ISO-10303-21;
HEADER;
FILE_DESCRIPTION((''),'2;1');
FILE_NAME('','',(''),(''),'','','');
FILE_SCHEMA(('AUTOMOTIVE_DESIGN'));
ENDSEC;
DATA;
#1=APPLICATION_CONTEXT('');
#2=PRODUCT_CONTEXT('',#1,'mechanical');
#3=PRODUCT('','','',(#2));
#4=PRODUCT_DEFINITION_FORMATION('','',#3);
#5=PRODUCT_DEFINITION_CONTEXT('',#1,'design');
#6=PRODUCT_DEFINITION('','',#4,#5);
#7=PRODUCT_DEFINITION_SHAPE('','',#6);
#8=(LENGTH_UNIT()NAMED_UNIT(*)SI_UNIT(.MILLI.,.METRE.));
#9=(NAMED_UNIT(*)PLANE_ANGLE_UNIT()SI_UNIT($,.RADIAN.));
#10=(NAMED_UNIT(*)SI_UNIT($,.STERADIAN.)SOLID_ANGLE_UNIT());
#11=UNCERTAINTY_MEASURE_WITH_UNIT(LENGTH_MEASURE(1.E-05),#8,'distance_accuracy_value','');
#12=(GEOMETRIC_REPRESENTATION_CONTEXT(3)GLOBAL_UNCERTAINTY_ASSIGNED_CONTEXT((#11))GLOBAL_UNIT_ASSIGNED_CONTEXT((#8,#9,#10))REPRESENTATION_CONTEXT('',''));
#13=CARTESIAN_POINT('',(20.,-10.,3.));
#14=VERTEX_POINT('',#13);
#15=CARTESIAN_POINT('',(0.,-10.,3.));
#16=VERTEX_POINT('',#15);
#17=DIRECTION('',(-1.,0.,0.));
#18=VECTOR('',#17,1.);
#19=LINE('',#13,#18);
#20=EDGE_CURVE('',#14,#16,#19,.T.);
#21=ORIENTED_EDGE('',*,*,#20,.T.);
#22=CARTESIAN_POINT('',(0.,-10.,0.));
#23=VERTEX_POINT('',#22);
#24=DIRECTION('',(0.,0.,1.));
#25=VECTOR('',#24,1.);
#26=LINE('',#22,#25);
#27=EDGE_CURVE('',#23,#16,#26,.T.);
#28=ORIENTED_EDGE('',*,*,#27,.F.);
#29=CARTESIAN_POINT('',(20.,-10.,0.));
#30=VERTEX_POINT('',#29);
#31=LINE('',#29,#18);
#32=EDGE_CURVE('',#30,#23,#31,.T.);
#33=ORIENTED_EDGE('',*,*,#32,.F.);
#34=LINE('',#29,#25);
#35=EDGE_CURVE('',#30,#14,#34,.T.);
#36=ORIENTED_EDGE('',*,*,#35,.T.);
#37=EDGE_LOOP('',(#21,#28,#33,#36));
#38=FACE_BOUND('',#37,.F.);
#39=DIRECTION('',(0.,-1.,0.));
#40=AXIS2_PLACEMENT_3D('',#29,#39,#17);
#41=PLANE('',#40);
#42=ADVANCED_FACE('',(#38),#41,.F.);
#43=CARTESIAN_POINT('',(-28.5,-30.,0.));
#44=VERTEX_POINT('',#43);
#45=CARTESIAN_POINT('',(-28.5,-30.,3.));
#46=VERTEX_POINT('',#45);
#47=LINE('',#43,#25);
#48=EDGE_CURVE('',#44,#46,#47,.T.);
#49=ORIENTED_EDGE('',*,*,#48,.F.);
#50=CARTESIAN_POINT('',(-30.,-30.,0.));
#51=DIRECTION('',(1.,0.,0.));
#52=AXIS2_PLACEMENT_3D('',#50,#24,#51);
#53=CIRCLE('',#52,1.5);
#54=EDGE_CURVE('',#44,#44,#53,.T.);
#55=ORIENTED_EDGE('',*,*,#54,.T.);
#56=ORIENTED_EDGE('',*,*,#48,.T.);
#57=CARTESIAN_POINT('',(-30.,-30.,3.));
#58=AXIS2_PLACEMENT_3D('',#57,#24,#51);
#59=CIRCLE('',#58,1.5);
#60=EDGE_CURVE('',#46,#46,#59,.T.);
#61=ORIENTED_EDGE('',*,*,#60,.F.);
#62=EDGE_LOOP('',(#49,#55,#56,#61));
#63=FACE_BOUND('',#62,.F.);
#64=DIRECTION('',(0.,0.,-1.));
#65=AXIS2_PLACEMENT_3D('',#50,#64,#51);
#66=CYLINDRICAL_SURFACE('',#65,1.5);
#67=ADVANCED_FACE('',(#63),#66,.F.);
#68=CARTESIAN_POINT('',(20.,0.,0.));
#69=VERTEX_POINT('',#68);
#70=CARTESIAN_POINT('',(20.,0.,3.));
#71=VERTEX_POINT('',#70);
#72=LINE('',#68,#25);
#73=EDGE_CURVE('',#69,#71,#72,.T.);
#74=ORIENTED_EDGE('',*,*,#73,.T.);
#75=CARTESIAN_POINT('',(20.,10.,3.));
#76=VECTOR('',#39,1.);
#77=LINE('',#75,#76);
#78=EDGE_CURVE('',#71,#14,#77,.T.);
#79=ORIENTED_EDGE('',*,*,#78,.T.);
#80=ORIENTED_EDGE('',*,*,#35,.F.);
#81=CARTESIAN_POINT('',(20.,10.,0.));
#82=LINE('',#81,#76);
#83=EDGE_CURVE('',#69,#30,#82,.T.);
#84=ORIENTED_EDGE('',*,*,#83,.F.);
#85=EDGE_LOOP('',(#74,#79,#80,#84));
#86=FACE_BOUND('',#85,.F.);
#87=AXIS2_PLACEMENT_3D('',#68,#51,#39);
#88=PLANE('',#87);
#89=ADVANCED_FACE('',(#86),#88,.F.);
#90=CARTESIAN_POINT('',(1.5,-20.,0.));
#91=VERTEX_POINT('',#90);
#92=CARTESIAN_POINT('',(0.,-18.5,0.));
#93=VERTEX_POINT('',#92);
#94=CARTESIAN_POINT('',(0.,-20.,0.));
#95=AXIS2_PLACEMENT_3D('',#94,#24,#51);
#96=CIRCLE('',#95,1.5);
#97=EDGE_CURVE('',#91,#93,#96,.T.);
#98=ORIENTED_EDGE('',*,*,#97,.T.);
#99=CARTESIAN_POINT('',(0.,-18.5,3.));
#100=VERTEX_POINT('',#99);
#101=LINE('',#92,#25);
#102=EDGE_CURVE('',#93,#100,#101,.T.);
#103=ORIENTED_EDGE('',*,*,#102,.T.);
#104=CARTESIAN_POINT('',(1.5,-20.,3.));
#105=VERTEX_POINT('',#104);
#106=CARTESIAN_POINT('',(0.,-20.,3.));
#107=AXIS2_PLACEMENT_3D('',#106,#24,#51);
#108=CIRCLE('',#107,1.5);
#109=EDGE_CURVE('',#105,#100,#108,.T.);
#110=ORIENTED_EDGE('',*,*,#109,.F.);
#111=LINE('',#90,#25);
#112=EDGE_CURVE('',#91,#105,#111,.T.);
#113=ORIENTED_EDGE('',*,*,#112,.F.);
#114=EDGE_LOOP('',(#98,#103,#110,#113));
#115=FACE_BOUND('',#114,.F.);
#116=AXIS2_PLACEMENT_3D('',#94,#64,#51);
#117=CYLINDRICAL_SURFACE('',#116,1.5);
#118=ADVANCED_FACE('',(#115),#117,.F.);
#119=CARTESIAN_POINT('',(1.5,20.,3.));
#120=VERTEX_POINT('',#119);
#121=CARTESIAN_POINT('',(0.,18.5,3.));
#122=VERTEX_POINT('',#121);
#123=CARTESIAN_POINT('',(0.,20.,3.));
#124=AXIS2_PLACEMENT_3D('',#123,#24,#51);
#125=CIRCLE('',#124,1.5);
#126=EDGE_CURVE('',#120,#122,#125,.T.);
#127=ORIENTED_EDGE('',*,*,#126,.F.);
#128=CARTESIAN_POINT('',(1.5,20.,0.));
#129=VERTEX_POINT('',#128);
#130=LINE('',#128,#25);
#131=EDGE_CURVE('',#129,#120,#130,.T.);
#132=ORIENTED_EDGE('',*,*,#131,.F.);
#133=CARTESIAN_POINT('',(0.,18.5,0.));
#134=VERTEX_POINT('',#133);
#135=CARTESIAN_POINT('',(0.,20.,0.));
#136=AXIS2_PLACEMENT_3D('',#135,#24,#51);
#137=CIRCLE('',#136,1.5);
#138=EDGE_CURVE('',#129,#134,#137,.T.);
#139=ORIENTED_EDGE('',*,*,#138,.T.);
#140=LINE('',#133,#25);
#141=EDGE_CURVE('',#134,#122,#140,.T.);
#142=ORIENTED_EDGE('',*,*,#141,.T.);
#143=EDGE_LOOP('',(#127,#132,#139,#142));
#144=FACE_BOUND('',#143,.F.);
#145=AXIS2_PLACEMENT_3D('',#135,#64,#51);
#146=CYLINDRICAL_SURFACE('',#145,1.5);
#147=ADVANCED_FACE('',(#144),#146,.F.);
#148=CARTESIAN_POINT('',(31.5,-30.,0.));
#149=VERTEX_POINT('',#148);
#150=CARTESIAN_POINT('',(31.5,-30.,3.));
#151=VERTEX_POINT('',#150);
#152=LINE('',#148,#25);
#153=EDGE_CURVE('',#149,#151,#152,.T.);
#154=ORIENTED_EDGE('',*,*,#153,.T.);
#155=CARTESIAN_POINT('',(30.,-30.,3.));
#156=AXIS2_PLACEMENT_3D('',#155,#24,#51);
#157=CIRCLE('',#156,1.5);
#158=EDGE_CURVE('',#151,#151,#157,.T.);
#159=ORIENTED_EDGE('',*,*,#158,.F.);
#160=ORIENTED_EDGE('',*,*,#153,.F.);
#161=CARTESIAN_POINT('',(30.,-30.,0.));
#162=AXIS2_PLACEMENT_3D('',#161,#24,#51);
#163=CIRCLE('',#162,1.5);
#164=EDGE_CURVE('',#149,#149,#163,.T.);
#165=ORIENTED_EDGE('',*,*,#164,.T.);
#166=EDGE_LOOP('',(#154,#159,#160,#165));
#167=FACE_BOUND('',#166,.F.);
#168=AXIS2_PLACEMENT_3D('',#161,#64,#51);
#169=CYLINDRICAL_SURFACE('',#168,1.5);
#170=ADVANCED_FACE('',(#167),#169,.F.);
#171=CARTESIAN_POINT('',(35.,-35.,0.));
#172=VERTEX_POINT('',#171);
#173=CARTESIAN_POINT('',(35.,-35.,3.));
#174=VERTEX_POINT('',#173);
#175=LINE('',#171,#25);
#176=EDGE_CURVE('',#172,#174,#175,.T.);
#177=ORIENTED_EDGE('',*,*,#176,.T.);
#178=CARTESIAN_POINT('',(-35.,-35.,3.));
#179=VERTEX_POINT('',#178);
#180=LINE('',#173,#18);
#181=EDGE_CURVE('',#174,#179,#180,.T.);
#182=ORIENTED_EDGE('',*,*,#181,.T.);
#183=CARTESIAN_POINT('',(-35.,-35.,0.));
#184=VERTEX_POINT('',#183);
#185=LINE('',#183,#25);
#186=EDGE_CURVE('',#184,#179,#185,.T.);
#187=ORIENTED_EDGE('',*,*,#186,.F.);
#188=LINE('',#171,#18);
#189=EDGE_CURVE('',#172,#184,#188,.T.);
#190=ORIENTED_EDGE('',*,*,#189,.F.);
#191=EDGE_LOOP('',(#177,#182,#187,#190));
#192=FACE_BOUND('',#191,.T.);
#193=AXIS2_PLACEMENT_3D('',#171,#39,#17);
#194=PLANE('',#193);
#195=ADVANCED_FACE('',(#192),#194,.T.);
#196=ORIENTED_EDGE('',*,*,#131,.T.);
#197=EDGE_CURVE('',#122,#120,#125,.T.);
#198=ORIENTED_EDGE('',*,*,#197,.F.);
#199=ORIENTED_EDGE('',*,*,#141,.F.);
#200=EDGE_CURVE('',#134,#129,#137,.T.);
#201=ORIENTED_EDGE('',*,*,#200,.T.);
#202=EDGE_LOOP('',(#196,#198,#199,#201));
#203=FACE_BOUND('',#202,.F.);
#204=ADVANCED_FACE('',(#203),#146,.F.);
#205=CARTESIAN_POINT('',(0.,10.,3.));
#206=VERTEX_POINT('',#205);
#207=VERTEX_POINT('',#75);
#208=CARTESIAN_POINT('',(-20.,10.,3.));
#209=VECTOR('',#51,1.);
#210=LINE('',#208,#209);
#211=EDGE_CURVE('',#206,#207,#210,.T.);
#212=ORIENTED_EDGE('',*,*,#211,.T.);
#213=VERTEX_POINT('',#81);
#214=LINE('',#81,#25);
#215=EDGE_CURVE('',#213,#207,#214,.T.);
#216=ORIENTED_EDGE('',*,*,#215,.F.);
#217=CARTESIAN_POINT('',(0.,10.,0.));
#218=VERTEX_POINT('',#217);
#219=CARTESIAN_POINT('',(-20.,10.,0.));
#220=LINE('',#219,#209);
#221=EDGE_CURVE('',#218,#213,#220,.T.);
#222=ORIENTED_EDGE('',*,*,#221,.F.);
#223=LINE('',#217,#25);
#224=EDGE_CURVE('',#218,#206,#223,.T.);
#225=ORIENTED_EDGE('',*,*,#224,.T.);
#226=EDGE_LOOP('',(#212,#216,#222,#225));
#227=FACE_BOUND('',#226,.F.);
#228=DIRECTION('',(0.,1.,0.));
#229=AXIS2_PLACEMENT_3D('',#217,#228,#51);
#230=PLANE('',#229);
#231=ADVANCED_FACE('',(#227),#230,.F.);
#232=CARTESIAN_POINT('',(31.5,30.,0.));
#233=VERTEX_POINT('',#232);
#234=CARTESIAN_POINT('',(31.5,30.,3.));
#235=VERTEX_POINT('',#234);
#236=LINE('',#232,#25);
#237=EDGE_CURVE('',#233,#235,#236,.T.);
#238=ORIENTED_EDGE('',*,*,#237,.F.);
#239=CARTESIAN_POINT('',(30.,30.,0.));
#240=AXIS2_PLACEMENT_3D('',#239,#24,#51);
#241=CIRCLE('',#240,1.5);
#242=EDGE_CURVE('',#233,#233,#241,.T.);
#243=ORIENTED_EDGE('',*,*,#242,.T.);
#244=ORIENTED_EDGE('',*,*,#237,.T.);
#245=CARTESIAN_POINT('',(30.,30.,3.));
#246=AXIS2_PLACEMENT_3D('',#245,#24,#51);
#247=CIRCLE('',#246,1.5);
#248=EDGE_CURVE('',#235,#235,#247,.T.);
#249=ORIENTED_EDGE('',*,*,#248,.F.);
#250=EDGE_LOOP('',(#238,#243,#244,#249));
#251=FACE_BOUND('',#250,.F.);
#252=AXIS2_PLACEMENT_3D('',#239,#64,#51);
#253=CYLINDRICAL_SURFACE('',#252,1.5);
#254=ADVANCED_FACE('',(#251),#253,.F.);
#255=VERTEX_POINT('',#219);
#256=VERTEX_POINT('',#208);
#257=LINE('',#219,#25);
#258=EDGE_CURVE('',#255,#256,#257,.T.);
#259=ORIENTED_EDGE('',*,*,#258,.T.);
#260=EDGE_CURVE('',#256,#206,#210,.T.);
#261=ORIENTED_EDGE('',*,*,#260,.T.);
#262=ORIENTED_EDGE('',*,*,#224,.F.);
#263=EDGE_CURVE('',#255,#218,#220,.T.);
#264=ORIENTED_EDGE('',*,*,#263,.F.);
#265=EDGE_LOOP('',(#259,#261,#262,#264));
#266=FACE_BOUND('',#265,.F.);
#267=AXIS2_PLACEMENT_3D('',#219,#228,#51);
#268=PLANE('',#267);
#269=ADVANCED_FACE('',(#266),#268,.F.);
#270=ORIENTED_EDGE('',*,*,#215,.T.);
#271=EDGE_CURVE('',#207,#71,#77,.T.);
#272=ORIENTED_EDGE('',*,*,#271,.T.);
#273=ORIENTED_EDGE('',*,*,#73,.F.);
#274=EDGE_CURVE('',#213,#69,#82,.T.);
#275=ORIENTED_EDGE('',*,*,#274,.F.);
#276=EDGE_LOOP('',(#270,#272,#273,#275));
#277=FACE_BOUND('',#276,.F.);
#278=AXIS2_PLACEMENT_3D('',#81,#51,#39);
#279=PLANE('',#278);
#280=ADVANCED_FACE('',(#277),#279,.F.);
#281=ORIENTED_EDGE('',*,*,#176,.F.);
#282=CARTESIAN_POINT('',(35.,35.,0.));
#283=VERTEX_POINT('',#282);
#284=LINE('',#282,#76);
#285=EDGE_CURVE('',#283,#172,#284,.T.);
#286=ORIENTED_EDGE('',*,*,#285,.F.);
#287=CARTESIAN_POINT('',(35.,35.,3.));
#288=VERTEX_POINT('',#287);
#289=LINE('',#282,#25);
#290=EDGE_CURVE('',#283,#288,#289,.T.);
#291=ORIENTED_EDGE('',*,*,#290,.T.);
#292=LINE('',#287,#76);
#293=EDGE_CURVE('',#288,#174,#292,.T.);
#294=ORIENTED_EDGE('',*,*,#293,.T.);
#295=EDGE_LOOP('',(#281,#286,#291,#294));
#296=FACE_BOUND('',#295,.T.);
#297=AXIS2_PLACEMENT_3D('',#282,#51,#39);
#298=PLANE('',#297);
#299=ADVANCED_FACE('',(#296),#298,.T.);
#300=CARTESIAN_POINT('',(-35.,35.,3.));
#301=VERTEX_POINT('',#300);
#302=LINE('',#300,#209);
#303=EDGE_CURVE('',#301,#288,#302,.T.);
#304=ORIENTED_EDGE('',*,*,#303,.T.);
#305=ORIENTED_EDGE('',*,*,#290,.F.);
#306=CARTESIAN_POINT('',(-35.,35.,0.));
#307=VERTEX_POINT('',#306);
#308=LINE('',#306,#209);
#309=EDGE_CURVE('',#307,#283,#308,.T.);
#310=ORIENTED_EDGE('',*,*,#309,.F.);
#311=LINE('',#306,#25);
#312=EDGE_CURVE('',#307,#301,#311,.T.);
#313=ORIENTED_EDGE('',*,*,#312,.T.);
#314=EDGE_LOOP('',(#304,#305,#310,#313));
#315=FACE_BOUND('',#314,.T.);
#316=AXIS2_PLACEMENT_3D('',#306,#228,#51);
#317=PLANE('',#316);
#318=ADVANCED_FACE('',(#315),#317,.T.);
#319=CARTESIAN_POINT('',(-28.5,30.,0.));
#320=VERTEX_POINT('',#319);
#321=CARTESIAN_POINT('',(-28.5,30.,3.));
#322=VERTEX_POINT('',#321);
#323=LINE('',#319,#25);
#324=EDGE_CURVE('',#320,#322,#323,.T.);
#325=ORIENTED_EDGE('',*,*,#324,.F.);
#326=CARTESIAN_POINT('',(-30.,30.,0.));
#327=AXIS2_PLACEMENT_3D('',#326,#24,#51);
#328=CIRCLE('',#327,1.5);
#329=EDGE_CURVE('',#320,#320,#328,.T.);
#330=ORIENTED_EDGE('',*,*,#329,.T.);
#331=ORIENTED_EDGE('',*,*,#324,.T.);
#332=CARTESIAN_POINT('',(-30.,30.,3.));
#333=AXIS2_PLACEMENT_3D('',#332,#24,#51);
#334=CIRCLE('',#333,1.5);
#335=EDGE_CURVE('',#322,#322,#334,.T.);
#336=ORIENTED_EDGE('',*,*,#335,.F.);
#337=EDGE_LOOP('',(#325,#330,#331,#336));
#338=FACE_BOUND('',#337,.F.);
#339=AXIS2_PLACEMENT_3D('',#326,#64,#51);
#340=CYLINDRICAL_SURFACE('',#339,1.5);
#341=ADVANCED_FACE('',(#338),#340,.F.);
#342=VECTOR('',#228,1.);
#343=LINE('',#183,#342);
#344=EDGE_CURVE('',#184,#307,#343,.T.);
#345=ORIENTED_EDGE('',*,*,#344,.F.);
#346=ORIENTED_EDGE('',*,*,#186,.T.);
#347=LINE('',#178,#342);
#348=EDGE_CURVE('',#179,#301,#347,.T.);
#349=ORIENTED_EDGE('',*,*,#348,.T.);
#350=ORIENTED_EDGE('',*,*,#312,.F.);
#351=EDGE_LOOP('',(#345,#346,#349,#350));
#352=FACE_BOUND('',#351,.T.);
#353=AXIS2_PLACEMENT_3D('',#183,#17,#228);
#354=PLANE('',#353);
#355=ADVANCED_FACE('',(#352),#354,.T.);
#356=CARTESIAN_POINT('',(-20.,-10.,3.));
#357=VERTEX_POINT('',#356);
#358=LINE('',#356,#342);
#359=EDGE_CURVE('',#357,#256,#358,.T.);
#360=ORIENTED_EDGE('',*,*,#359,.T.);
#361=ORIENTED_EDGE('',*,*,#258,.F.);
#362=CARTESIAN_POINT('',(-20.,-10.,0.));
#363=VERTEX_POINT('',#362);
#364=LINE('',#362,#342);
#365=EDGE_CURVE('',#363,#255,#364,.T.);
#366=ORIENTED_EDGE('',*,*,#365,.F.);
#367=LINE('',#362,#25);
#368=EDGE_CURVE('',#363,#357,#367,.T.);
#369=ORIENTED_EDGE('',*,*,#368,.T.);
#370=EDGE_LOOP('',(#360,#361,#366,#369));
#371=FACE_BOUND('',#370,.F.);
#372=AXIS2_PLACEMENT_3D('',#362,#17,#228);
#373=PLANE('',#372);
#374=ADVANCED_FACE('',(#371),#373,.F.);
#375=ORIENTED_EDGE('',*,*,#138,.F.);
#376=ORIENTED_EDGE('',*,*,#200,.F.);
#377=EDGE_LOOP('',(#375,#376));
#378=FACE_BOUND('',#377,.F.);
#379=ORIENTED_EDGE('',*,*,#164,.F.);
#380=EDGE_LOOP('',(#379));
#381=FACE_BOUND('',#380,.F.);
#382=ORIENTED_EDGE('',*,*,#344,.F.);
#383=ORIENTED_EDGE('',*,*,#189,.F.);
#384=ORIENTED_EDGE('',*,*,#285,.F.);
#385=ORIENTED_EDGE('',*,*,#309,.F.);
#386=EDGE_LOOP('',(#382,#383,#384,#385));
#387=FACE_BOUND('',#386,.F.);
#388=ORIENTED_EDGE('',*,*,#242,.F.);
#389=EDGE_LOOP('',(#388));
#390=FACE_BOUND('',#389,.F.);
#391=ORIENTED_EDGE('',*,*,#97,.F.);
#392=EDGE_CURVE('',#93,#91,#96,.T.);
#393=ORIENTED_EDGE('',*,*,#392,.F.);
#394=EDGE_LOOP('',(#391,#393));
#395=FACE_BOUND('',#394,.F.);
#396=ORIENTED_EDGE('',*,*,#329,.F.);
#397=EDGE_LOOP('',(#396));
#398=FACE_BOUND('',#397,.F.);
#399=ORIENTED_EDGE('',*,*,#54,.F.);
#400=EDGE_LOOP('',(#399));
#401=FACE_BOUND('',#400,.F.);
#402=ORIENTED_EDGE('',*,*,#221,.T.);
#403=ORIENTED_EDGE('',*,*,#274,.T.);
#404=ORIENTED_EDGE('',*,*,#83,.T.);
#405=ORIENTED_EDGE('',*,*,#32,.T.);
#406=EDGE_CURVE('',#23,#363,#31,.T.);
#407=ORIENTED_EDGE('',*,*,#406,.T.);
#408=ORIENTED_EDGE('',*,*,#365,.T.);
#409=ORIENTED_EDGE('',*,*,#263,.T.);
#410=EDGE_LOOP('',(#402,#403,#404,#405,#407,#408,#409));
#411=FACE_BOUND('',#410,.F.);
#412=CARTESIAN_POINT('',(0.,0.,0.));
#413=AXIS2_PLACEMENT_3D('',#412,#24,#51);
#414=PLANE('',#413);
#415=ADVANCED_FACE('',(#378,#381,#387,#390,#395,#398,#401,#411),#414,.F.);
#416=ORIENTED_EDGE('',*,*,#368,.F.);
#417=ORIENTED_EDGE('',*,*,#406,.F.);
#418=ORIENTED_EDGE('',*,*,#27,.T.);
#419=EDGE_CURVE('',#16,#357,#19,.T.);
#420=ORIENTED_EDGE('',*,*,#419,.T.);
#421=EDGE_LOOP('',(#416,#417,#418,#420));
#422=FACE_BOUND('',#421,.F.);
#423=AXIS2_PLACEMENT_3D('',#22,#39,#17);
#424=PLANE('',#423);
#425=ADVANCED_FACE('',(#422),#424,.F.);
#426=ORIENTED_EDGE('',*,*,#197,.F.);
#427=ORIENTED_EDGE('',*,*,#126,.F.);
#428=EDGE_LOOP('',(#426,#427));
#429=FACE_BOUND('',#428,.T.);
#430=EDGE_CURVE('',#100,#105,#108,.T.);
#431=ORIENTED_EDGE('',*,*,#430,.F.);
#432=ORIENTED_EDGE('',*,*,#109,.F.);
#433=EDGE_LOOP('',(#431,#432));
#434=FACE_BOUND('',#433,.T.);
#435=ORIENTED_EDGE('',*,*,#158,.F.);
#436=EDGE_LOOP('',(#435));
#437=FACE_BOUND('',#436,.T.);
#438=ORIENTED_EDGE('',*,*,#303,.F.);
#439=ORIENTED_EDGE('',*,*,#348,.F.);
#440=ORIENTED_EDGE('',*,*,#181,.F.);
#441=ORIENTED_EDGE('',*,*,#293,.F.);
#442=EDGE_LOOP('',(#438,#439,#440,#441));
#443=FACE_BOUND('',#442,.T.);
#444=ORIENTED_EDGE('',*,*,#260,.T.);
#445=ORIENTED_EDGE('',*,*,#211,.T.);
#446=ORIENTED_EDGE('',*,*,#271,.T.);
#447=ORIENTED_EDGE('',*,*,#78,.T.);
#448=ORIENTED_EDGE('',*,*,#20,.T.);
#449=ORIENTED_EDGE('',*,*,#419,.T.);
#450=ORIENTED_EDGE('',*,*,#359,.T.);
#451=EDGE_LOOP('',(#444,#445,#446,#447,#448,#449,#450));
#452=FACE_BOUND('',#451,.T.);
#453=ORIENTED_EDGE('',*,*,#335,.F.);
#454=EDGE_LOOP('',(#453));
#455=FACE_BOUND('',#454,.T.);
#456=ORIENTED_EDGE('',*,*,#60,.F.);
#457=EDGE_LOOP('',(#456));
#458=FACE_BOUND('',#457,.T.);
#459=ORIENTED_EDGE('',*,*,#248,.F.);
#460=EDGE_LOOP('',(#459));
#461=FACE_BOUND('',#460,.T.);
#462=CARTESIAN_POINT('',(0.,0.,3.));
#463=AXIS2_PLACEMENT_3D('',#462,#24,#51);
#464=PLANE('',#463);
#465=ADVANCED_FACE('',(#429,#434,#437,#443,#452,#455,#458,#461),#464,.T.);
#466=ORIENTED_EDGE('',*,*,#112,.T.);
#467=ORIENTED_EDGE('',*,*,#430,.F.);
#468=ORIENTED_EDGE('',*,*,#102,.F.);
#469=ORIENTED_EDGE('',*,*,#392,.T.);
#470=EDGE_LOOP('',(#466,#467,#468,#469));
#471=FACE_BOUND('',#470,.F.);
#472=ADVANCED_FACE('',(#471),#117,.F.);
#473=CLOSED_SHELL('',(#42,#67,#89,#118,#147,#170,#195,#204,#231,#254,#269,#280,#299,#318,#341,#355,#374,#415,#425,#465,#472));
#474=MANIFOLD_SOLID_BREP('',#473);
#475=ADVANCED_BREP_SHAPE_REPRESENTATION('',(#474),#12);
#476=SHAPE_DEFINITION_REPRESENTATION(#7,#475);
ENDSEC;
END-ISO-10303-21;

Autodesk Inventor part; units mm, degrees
ref_plane "YZ Plane" through (0, 0, 0) normal (1, 0, 0) x (0, 1, 0)
ref_plane "XZ Plane" through (0, 0, 0) normal (0, 1, 0) x (-1, 0, 0)
ref_plane "XY Plane" through (0, 0, 0) normal (0, 0, 1) x (1, 0, 0)
sketch "Sketch1" plane through (0, 0, 0) normal (0, 0, 1) x (1, 0, 0)
  line L0 (-20, 10) -> (20, 10)
  line L1 (20, 10) -> (20, -10)
  line L2 (20, -10) -> (-20, -10)
  line L3 (-20, -10) -> (-20, 10)
  line L4 (-20, 10) -> (20, -10) construction
  line L5 (20, 10) -> (-20, -10) construction
  line L6 (20, 0) -> (30, 0)
  line L7 (35, -35) -> (-35, -35)
  line L8 (-35, -35) -> (-35, 35)
  line L9 (-35, 35) -> (35, 35)
  line L10 (35, 35) -> (35, -35)
  line L11 (35, -35) -> (-35, 35) construction
  line L12 (-35, -35) -> (35, 35) construction
  line L13 (30, -30) -> (-30, 30) construction
  line L14 (-30, -30) -> (30, 30) construction
  circle A0 centre (-30, 30) radius 1.5
  circle A1 centre (30, 30) radius 1.5
  circle A2 centre (-30, -30) radius 1.5
  circle A3 centre (30, -30) radius 1.5
  line L15 (0, 10) -> (0, 20)
  line L16 (0, -10) -> (0, -20)
  circle A4 centre (0, 20) radius 1.5
  circle A5 centre (0, -20) radius 1.5
  point P0 (0, 0)
  dimension "d0" = 40
  dimension "d1" = 20
  dimension "d2" = 10
  dimension "d3" = 70
  dimension "d4" = 70
  dimension "d9" = 3
  dimension "d10" = 3
  dimension "d11" = 3
  dimension "d12" = 3
  dimension "d15" = 10
  dimension "d16" = 10
  dimension "d17" = 3
  dimension "d18" = 3
extrude "Extrusion3" add sketch "Sketch1" along normal blind 3
properties part number "Servo Holder TOP"
